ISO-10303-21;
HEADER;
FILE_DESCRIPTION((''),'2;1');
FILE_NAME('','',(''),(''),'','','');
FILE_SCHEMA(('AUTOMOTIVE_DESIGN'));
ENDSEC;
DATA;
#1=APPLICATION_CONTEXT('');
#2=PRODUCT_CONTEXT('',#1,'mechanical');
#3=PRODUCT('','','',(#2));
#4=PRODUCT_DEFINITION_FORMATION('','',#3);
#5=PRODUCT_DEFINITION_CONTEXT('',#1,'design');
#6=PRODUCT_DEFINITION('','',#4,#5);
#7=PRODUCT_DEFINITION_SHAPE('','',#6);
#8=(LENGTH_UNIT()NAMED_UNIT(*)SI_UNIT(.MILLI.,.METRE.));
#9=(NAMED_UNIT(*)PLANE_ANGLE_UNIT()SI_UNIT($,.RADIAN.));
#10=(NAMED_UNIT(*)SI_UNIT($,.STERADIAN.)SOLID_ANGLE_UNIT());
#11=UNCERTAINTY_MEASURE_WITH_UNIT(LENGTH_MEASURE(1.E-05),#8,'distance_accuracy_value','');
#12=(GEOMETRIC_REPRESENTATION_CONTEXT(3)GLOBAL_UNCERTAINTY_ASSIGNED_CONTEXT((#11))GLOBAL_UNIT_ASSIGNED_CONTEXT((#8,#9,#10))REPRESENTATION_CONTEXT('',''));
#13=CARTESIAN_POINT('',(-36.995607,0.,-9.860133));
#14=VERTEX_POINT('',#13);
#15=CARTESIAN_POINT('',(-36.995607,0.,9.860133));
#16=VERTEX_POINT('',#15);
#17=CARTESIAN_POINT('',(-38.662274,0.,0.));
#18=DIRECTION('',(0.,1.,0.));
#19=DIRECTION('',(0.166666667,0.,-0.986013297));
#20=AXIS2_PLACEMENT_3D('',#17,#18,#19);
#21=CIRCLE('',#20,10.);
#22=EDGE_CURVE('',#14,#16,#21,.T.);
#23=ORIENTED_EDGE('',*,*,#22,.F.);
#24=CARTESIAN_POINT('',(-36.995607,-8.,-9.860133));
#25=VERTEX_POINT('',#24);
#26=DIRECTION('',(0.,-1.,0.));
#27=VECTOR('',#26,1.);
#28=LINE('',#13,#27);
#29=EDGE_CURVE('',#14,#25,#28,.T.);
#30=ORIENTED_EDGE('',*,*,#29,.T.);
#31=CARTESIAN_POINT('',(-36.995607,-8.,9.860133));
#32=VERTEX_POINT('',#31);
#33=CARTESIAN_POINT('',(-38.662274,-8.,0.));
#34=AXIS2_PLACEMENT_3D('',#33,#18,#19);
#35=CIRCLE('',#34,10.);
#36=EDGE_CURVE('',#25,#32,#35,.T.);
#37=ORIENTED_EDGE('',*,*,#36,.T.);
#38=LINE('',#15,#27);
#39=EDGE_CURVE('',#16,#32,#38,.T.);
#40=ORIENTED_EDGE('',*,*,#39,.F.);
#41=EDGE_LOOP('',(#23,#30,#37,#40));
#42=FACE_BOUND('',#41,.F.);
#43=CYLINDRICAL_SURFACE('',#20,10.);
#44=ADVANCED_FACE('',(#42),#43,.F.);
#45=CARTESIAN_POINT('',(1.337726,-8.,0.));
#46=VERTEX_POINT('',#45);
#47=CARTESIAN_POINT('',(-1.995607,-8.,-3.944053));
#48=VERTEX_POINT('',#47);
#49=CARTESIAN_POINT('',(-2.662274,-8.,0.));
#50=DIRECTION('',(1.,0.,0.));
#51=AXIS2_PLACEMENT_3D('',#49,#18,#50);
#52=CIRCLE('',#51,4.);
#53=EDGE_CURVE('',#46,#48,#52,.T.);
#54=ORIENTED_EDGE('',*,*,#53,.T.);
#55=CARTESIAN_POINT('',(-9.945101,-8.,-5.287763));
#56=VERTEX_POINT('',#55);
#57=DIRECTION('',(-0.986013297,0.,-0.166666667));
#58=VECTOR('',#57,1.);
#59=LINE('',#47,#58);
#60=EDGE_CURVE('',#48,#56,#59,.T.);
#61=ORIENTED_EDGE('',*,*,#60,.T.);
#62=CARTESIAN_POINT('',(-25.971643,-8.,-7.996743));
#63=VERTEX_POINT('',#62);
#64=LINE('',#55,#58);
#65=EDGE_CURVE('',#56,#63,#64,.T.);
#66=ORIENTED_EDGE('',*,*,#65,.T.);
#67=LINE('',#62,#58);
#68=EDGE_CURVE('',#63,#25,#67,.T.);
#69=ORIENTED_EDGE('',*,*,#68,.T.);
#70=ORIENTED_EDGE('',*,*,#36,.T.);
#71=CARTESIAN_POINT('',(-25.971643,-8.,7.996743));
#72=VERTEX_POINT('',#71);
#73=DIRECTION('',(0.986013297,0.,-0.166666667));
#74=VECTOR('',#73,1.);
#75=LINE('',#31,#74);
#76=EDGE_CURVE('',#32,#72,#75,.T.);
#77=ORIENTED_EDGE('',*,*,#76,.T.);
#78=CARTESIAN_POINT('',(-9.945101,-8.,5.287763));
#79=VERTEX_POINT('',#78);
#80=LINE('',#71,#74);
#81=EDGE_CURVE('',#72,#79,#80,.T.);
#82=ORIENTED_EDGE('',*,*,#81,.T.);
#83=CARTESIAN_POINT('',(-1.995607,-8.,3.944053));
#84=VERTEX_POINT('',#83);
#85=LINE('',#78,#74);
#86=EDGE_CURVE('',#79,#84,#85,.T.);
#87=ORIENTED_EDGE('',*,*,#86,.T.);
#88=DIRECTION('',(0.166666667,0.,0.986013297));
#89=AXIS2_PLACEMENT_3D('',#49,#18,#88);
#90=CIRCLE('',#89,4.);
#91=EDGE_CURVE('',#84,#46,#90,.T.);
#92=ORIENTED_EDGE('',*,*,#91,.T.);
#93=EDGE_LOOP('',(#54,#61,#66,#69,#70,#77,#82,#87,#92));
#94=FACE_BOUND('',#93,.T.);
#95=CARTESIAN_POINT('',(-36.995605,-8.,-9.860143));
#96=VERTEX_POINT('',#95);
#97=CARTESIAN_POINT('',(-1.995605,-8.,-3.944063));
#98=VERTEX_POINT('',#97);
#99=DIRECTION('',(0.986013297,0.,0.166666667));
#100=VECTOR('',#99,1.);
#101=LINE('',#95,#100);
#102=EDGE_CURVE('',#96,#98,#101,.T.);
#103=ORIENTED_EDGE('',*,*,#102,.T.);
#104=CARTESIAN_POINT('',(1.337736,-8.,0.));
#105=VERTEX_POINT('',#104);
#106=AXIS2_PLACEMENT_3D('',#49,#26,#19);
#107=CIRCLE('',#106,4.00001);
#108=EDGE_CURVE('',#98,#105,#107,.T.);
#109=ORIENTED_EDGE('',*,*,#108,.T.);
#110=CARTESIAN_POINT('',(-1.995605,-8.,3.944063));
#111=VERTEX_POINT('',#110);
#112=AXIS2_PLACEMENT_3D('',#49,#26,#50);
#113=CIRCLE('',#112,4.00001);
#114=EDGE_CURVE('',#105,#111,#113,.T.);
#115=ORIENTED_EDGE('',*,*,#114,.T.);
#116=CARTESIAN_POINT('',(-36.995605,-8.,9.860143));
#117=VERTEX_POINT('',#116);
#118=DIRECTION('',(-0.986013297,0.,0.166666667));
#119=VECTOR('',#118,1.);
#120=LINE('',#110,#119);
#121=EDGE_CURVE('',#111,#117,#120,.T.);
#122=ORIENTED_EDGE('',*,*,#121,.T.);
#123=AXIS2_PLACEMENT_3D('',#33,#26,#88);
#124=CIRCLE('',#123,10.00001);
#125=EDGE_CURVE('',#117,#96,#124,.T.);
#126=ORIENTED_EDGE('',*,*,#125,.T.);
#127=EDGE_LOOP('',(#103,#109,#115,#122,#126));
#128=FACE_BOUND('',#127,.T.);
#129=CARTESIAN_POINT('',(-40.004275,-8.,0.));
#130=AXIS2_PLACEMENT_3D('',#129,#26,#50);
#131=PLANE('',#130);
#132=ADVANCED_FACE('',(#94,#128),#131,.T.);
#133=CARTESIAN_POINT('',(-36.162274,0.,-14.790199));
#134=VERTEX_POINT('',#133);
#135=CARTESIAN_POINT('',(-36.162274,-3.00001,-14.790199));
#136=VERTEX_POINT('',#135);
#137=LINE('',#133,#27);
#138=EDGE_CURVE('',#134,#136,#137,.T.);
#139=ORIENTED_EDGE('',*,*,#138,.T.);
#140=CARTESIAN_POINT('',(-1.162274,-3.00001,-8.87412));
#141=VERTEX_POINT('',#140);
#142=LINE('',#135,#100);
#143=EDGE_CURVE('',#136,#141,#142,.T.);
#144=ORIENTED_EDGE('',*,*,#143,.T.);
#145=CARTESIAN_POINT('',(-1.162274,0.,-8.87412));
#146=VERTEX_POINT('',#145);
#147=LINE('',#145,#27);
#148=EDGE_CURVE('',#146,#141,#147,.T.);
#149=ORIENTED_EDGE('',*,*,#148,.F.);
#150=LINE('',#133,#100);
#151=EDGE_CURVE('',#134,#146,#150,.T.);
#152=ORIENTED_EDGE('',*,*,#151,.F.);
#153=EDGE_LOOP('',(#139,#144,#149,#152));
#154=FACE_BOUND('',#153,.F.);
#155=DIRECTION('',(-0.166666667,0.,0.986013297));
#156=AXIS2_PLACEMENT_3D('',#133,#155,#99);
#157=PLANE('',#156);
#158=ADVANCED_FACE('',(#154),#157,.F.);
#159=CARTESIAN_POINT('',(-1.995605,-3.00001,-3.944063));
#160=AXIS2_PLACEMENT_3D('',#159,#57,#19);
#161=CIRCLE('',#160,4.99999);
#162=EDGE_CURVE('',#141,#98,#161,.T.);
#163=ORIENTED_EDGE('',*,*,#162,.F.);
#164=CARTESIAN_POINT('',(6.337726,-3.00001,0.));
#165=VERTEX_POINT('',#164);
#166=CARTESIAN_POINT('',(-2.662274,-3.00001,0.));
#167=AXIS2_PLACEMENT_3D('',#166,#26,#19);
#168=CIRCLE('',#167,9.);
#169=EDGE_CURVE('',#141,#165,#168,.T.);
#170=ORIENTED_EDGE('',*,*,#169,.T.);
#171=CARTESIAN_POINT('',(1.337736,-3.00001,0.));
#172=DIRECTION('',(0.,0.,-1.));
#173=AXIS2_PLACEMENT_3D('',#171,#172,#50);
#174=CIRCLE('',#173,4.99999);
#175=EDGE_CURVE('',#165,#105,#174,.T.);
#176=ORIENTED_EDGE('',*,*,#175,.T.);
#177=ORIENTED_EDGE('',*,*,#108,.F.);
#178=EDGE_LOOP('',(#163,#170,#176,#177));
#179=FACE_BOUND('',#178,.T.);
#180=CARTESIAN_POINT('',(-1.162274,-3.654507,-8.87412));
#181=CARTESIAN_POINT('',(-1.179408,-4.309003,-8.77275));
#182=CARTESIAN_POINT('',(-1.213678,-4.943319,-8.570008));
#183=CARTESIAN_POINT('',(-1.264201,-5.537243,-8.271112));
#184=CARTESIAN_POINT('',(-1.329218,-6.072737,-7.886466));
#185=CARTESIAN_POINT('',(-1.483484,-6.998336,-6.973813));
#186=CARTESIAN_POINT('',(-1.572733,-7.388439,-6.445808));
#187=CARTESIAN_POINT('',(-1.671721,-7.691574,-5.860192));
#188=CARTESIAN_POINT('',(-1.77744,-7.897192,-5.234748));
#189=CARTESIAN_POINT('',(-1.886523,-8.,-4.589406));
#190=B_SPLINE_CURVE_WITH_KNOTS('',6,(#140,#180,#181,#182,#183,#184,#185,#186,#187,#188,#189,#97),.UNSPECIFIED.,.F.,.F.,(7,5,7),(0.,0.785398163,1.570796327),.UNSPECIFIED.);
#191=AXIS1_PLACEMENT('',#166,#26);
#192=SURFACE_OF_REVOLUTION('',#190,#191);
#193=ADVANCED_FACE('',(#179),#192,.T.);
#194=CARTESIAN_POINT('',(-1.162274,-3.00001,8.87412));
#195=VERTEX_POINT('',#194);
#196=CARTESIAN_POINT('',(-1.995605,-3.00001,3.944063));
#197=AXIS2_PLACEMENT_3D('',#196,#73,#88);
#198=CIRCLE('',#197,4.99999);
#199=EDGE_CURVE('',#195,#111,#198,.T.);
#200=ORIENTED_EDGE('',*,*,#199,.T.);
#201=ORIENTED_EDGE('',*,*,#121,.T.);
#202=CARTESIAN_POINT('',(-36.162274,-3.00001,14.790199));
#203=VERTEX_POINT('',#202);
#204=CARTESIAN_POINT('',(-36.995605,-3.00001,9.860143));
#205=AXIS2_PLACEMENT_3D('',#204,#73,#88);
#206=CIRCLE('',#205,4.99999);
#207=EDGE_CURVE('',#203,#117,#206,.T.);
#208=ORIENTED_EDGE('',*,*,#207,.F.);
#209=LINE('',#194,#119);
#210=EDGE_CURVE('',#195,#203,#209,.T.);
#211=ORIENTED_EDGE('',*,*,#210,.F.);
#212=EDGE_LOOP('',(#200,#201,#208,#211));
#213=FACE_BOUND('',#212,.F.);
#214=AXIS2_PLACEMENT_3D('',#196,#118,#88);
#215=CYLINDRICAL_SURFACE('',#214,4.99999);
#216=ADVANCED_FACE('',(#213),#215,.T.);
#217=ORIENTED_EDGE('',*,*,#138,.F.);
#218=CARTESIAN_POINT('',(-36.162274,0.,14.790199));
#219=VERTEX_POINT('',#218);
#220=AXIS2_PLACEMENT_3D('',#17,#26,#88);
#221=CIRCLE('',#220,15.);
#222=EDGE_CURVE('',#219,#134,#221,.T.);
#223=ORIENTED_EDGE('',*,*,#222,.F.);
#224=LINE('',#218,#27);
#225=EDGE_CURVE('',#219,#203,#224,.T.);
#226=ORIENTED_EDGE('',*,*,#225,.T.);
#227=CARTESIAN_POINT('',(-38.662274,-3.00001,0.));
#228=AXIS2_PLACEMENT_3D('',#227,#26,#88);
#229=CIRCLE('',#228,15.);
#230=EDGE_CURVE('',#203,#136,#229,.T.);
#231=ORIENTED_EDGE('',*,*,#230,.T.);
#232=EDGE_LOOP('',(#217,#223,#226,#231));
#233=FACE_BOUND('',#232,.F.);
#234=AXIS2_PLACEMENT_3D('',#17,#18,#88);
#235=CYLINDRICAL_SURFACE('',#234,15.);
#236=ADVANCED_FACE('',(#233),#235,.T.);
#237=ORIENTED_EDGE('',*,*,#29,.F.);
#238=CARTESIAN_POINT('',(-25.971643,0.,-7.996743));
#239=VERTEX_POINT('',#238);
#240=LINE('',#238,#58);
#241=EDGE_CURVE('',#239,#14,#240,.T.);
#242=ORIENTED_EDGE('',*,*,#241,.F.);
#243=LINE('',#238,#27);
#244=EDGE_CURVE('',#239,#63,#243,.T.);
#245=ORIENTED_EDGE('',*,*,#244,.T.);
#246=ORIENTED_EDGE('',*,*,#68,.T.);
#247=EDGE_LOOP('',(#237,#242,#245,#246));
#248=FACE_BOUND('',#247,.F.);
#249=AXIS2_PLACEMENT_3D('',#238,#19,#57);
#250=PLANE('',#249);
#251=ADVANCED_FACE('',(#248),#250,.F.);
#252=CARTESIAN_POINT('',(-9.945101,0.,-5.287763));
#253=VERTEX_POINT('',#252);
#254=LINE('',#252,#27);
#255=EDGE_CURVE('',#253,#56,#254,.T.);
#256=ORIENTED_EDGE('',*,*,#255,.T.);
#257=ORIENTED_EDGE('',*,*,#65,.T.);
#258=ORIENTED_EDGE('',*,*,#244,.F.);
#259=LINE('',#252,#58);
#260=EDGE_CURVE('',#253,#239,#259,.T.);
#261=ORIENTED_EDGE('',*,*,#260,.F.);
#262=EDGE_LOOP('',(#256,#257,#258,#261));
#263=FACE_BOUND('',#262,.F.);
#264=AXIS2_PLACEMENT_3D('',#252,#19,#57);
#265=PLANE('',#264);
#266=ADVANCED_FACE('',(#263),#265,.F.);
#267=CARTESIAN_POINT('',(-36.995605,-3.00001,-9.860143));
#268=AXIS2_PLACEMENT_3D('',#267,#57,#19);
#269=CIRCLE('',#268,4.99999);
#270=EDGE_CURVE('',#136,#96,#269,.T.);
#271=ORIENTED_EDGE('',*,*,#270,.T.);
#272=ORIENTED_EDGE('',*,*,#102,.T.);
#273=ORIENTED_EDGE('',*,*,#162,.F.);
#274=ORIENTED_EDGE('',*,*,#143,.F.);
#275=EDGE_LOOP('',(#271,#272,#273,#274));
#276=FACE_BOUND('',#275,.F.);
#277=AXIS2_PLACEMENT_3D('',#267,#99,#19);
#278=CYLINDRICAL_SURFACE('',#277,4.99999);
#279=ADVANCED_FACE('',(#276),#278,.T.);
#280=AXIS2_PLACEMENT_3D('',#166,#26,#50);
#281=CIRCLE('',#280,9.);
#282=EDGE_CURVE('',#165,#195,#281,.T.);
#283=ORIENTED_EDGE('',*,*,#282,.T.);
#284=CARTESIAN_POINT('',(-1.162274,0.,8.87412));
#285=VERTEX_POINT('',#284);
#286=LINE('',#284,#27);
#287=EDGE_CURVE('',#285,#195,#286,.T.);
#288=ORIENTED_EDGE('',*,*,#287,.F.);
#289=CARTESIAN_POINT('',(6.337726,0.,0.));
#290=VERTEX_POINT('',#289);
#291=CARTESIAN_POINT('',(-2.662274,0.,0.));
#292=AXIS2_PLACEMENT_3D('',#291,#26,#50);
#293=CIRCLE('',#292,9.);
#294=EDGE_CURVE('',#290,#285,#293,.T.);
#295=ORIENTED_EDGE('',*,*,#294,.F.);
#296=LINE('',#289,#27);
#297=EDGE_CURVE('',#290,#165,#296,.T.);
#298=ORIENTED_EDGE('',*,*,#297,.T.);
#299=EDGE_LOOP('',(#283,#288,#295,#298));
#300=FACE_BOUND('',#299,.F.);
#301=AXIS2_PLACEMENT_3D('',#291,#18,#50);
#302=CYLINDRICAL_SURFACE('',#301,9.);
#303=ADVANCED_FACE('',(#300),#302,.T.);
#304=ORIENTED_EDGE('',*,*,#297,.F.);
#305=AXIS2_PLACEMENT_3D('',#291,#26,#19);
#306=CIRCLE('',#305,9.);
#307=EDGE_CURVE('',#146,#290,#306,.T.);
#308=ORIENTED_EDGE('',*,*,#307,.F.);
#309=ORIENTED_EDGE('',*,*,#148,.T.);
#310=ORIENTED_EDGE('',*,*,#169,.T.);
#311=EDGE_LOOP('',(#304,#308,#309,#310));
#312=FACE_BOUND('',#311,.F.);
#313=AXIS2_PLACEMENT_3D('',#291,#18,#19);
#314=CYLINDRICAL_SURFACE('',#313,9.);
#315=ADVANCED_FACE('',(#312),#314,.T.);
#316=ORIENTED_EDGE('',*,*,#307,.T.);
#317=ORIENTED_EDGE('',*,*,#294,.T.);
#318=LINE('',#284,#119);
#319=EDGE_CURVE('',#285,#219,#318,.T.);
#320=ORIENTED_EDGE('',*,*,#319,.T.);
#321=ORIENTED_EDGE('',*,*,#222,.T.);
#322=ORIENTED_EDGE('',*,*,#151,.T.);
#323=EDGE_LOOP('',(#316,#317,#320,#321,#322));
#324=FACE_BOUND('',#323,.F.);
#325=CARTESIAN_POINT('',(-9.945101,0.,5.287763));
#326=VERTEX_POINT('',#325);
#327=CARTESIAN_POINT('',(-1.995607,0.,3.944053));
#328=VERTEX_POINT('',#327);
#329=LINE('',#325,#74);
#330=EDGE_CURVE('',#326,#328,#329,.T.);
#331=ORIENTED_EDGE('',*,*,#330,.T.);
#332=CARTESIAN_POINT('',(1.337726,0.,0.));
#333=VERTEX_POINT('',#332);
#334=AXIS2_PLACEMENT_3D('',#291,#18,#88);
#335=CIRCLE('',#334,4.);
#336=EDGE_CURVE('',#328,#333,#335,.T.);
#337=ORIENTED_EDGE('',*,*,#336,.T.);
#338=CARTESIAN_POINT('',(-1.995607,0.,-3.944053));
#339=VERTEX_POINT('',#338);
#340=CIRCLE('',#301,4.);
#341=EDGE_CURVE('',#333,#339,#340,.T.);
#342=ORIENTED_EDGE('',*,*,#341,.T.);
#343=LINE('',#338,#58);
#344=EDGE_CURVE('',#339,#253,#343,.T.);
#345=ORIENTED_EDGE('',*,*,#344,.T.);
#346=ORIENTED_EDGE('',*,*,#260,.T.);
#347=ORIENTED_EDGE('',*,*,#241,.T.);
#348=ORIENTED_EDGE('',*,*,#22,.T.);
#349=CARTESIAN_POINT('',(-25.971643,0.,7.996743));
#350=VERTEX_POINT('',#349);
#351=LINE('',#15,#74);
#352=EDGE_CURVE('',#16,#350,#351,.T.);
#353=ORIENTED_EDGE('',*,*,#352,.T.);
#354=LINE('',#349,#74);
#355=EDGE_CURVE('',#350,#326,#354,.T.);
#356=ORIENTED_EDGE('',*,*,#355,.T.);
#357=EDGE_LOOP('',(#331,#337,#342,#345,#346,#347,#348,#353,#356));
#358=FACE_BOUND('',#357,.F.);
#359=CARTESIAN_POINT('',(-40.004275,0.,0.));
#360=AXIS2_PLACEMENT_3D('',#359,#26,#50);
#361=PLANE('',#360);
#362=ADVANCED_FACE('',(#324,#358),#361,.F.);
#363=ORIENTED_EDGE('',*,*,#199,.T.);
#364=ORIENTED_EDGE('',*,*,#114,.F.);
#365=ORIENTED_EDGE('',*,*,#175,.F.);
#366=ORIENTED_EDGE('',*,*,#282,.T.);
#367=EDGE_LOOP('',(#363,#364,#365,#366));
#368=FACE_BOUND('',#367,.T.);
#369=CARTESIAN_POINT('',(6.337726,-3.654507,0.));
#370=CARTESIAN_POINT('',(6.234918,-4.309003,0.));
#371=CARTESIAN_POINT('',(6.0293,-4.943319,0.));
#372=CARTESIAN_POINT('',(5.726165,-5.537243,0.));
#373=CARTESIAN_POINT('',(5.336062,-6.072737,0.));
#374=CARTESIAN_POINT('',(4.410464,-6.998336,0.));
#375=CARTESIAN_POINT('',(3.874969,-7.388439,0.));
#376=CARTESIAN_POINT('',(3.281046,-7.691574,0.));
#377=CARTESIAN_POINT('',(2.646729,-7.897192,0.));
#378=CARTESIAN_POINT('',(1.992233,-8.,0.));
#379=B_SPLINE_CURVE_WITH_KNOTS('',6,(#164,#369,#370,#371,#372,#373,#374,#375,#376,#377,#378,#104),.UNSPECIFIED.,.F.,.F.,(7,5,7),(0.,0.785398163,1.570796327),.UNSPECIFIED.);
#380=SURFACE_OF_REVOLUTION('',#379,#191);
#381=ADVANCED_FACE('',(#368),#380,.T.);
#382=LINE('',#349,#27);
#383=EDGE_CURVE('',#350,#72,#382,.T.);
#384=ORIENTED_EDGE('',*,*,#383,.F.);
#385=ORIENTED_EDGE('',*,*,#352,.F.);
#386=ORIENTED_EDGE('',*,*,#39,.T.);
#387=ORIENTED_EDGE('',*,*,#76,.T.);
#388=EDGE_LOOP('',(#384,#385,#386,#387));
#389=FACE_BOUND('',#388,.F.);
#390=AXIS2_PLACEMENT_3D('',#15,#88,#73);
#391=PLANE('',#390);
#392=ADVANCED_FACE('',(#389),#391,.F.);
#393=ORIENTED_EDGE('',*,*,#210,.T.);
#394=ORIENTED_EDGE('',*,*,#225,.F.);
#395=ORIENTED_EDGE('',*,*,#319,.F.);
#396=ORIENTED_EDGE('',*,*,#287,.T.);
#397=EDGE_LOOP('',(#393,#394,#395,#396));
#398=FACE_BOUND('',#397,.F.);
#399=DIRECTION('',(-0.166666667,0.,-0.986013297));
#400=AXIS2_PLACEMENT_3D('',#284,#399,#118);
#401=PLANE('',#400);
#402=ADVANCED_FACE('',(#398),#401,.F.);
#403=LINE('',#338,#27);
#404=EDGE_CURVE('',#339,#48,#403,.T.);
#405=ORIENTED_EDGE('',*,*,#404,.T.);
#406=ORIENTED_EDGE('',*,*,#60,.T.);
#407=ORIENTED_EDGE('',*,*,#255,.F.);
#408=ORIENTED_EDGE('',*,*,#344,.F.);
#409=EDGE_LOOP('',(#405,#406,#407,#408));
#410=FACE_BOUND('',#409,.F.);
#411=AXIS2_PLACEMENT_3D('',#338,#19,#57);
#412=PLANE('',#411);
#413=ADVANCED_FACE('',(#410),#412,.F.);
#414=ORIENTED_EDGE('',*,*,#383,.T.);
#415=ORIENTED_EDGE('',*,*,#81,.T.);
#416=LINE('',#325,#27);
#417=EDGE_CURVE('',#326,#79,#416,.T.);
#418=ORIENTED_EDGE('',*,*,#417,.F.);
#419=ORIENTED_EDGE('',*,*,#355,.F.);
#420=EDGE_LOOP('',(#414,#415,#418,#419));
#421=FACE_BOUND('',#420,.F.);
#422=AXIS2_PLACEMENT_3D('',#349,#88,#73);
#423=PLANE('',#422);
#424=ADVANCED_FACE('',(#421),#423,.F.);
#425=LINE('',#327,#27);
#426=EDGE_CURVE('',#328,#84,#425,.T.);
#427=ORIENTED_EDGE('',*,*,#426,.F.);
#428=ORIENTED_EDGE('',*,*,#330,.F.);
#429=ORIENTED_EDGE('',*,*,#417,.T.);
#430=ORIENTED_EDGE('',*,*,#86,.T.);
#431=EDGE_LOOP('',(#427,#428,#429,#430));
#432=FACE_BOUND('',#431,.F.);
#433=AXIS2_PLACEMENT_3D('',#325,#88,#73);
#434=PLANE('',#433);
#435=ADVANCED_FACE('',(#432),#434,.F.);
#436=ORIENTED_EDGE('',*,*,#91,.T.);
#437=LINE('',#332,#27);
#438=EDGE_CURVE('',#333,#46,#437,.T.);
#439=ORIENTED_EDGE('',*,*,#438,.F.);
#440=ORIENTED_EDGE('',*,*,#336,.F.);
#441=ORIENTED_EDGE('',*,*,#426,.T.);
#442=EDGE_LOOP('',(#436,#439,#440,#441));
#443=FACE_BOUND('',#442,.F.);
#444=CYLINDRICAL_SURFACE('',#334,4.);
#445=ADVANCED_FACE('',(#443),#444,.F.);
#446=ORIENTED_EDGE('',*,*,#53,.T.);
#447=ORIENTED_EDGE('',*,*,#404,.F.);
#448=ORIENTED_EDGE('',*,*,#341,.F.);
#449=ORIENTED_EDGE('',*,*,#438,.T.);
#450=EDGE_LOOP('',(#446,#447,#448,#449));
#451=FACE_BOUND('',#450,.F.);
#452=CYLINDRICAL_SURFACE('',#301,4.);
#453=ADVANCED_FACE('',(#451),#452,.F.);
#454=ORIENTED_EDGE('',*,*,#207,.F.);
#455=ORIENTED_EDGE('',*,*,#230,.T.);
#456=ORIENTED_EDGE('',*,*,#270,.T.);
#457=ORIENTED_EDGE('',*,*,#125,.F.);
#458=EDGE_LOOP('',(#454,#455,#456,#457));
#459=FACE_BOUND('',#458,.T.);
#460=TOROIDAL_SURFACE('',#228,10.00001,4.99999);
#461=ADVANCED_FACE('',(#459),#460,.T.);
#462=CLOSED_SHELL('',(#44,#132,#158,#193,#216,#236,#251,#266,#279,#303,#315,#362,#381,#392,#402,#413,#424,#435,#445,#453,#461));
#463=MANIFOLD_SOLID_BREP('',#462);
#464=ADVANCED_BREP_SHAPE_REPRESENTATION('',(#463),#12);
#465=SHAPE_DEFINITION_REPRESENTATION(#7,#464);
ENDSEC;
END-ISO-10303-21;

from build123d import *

# Parameters (mm, degrees)
F1_DEPTH = 8
F2_R     = 4.99999


# Not quite as in the source:
# - a fillet or chamfer is up to 0.001 mm smaller than in the source, because OpenCascade refuses the exact size


with BuildPart() as f1:
    # F0 (on Front) → F1 (new body)
    with BuildSketch(Plane.XZ):
        with BuildLine():
            ThreePointArc((-36.9956071563, -9.8601329718), (-48.6622738229, 0), (-36.9956071563, 9.8601329718))
            Line((-36.9956071563, 9.8601329718), (-25.9716433602, 7.9967429906))
            ThreePointArc((-25.9716433602, 7.9967429906), (-30.3420228558, 12.4809223955), (-36.1622738229, 14.7901994577))
            ThreePointArc((-36.1622738229, 14.7901994577), (-53.6622738229, 0), (-36.1622738229, -14.7901994577))
            ThreePointArc((-36.1622738229, -14.7901994577), (-30.3420228558, -12.4809223955), (-25.9716433602, -7.9967429906))
            Line((-25.9716433602, -7.9967429906), (-36.9956071563, -9.8601329718))
        make_face()
        with BuildLine():
            ThreePointArc((-36.1622738229, 14.7901994577), (-30.3420228558, 12.4809223955), (-25.9716433602, 7.9967429906))
            Line((-25.9716433602, 7.9967429906), (-9.9451005014, 5.2877628134))
            ThreePointArc((-9.9451005014, 5.2877628134), (-6.064590678, 8.3321209795), (-1.1622738229, 8.8741196746))
            Line((-1.1622738229, 8.8741196746), (-36.1622738229, 14.7901994577))
        make_face()
        with BuildLine():
            Line((-9.9451005014, -5.2877628134), (-25.9716433602, -7.9967429906))
            ThreePointArc((-25.9716433602, -7.9967429906), (-30.3420228558, -12.4809223955), (-36.1622738229, -14.7901994577))
            Line((-36.1622738229, -14.7901994577), (-1.1622738229, -8.8741196746))
            ThreePointArc((-1.1622738229, -8.8741196746), (-6.064590678, -8.3321209795), (-9.9451005014, -5.2877628134))
        make_face()
        with BuildLine():
            ThreePointArc((-1.1622738229, 8.8741196746), (-6.064590678, 8.3321209795), (-9.9451005014, 5.2877628134))
            Line((-9.9451005014, 5.2877628134), (-1.9956071563, 3.9440531887))
            ThreePointArc((-1.9956071563, 3.9440531887), (0.3927766404, 2.5819888975), (1.3377261771, 0))
            ThreePointArc((1.3377261771, 0), (0.3927766404, -2.5819888975), (-1.9956071563, -3.9440531887))
            Line((-1.9956071563, -3.9440531887), (-9.9451005014, -5.2877628134))
            ThreePointArc((-9.9451005014, -5.2877628134), (-6.064590678, -8.3321209795), (-1.1622738229, -8.8741196746))
            ThreePointArc((-1.1622738229, -8.8741196746), (4.2115897195, -5.8094750193), (6.3377261771, 0))
            ThreePointArc((6.3377261771, 0), (4.2115897195, 5.8094750193), (-1.1622738229, 8.8741196746))
        make_face()
    extrude(amount=F1_DEPTH)

    # F2 (radius 5 in the source; OpenCascade refuses exactly that, so slightly less here)
    f2_edges = [f1.edges().sort_by_distance(p)[0] for p in [
        (-18.662274, -8, 11.83216),
    ]]
    fillet(f2_edges, radius=F2_R)


solid = f1.part
